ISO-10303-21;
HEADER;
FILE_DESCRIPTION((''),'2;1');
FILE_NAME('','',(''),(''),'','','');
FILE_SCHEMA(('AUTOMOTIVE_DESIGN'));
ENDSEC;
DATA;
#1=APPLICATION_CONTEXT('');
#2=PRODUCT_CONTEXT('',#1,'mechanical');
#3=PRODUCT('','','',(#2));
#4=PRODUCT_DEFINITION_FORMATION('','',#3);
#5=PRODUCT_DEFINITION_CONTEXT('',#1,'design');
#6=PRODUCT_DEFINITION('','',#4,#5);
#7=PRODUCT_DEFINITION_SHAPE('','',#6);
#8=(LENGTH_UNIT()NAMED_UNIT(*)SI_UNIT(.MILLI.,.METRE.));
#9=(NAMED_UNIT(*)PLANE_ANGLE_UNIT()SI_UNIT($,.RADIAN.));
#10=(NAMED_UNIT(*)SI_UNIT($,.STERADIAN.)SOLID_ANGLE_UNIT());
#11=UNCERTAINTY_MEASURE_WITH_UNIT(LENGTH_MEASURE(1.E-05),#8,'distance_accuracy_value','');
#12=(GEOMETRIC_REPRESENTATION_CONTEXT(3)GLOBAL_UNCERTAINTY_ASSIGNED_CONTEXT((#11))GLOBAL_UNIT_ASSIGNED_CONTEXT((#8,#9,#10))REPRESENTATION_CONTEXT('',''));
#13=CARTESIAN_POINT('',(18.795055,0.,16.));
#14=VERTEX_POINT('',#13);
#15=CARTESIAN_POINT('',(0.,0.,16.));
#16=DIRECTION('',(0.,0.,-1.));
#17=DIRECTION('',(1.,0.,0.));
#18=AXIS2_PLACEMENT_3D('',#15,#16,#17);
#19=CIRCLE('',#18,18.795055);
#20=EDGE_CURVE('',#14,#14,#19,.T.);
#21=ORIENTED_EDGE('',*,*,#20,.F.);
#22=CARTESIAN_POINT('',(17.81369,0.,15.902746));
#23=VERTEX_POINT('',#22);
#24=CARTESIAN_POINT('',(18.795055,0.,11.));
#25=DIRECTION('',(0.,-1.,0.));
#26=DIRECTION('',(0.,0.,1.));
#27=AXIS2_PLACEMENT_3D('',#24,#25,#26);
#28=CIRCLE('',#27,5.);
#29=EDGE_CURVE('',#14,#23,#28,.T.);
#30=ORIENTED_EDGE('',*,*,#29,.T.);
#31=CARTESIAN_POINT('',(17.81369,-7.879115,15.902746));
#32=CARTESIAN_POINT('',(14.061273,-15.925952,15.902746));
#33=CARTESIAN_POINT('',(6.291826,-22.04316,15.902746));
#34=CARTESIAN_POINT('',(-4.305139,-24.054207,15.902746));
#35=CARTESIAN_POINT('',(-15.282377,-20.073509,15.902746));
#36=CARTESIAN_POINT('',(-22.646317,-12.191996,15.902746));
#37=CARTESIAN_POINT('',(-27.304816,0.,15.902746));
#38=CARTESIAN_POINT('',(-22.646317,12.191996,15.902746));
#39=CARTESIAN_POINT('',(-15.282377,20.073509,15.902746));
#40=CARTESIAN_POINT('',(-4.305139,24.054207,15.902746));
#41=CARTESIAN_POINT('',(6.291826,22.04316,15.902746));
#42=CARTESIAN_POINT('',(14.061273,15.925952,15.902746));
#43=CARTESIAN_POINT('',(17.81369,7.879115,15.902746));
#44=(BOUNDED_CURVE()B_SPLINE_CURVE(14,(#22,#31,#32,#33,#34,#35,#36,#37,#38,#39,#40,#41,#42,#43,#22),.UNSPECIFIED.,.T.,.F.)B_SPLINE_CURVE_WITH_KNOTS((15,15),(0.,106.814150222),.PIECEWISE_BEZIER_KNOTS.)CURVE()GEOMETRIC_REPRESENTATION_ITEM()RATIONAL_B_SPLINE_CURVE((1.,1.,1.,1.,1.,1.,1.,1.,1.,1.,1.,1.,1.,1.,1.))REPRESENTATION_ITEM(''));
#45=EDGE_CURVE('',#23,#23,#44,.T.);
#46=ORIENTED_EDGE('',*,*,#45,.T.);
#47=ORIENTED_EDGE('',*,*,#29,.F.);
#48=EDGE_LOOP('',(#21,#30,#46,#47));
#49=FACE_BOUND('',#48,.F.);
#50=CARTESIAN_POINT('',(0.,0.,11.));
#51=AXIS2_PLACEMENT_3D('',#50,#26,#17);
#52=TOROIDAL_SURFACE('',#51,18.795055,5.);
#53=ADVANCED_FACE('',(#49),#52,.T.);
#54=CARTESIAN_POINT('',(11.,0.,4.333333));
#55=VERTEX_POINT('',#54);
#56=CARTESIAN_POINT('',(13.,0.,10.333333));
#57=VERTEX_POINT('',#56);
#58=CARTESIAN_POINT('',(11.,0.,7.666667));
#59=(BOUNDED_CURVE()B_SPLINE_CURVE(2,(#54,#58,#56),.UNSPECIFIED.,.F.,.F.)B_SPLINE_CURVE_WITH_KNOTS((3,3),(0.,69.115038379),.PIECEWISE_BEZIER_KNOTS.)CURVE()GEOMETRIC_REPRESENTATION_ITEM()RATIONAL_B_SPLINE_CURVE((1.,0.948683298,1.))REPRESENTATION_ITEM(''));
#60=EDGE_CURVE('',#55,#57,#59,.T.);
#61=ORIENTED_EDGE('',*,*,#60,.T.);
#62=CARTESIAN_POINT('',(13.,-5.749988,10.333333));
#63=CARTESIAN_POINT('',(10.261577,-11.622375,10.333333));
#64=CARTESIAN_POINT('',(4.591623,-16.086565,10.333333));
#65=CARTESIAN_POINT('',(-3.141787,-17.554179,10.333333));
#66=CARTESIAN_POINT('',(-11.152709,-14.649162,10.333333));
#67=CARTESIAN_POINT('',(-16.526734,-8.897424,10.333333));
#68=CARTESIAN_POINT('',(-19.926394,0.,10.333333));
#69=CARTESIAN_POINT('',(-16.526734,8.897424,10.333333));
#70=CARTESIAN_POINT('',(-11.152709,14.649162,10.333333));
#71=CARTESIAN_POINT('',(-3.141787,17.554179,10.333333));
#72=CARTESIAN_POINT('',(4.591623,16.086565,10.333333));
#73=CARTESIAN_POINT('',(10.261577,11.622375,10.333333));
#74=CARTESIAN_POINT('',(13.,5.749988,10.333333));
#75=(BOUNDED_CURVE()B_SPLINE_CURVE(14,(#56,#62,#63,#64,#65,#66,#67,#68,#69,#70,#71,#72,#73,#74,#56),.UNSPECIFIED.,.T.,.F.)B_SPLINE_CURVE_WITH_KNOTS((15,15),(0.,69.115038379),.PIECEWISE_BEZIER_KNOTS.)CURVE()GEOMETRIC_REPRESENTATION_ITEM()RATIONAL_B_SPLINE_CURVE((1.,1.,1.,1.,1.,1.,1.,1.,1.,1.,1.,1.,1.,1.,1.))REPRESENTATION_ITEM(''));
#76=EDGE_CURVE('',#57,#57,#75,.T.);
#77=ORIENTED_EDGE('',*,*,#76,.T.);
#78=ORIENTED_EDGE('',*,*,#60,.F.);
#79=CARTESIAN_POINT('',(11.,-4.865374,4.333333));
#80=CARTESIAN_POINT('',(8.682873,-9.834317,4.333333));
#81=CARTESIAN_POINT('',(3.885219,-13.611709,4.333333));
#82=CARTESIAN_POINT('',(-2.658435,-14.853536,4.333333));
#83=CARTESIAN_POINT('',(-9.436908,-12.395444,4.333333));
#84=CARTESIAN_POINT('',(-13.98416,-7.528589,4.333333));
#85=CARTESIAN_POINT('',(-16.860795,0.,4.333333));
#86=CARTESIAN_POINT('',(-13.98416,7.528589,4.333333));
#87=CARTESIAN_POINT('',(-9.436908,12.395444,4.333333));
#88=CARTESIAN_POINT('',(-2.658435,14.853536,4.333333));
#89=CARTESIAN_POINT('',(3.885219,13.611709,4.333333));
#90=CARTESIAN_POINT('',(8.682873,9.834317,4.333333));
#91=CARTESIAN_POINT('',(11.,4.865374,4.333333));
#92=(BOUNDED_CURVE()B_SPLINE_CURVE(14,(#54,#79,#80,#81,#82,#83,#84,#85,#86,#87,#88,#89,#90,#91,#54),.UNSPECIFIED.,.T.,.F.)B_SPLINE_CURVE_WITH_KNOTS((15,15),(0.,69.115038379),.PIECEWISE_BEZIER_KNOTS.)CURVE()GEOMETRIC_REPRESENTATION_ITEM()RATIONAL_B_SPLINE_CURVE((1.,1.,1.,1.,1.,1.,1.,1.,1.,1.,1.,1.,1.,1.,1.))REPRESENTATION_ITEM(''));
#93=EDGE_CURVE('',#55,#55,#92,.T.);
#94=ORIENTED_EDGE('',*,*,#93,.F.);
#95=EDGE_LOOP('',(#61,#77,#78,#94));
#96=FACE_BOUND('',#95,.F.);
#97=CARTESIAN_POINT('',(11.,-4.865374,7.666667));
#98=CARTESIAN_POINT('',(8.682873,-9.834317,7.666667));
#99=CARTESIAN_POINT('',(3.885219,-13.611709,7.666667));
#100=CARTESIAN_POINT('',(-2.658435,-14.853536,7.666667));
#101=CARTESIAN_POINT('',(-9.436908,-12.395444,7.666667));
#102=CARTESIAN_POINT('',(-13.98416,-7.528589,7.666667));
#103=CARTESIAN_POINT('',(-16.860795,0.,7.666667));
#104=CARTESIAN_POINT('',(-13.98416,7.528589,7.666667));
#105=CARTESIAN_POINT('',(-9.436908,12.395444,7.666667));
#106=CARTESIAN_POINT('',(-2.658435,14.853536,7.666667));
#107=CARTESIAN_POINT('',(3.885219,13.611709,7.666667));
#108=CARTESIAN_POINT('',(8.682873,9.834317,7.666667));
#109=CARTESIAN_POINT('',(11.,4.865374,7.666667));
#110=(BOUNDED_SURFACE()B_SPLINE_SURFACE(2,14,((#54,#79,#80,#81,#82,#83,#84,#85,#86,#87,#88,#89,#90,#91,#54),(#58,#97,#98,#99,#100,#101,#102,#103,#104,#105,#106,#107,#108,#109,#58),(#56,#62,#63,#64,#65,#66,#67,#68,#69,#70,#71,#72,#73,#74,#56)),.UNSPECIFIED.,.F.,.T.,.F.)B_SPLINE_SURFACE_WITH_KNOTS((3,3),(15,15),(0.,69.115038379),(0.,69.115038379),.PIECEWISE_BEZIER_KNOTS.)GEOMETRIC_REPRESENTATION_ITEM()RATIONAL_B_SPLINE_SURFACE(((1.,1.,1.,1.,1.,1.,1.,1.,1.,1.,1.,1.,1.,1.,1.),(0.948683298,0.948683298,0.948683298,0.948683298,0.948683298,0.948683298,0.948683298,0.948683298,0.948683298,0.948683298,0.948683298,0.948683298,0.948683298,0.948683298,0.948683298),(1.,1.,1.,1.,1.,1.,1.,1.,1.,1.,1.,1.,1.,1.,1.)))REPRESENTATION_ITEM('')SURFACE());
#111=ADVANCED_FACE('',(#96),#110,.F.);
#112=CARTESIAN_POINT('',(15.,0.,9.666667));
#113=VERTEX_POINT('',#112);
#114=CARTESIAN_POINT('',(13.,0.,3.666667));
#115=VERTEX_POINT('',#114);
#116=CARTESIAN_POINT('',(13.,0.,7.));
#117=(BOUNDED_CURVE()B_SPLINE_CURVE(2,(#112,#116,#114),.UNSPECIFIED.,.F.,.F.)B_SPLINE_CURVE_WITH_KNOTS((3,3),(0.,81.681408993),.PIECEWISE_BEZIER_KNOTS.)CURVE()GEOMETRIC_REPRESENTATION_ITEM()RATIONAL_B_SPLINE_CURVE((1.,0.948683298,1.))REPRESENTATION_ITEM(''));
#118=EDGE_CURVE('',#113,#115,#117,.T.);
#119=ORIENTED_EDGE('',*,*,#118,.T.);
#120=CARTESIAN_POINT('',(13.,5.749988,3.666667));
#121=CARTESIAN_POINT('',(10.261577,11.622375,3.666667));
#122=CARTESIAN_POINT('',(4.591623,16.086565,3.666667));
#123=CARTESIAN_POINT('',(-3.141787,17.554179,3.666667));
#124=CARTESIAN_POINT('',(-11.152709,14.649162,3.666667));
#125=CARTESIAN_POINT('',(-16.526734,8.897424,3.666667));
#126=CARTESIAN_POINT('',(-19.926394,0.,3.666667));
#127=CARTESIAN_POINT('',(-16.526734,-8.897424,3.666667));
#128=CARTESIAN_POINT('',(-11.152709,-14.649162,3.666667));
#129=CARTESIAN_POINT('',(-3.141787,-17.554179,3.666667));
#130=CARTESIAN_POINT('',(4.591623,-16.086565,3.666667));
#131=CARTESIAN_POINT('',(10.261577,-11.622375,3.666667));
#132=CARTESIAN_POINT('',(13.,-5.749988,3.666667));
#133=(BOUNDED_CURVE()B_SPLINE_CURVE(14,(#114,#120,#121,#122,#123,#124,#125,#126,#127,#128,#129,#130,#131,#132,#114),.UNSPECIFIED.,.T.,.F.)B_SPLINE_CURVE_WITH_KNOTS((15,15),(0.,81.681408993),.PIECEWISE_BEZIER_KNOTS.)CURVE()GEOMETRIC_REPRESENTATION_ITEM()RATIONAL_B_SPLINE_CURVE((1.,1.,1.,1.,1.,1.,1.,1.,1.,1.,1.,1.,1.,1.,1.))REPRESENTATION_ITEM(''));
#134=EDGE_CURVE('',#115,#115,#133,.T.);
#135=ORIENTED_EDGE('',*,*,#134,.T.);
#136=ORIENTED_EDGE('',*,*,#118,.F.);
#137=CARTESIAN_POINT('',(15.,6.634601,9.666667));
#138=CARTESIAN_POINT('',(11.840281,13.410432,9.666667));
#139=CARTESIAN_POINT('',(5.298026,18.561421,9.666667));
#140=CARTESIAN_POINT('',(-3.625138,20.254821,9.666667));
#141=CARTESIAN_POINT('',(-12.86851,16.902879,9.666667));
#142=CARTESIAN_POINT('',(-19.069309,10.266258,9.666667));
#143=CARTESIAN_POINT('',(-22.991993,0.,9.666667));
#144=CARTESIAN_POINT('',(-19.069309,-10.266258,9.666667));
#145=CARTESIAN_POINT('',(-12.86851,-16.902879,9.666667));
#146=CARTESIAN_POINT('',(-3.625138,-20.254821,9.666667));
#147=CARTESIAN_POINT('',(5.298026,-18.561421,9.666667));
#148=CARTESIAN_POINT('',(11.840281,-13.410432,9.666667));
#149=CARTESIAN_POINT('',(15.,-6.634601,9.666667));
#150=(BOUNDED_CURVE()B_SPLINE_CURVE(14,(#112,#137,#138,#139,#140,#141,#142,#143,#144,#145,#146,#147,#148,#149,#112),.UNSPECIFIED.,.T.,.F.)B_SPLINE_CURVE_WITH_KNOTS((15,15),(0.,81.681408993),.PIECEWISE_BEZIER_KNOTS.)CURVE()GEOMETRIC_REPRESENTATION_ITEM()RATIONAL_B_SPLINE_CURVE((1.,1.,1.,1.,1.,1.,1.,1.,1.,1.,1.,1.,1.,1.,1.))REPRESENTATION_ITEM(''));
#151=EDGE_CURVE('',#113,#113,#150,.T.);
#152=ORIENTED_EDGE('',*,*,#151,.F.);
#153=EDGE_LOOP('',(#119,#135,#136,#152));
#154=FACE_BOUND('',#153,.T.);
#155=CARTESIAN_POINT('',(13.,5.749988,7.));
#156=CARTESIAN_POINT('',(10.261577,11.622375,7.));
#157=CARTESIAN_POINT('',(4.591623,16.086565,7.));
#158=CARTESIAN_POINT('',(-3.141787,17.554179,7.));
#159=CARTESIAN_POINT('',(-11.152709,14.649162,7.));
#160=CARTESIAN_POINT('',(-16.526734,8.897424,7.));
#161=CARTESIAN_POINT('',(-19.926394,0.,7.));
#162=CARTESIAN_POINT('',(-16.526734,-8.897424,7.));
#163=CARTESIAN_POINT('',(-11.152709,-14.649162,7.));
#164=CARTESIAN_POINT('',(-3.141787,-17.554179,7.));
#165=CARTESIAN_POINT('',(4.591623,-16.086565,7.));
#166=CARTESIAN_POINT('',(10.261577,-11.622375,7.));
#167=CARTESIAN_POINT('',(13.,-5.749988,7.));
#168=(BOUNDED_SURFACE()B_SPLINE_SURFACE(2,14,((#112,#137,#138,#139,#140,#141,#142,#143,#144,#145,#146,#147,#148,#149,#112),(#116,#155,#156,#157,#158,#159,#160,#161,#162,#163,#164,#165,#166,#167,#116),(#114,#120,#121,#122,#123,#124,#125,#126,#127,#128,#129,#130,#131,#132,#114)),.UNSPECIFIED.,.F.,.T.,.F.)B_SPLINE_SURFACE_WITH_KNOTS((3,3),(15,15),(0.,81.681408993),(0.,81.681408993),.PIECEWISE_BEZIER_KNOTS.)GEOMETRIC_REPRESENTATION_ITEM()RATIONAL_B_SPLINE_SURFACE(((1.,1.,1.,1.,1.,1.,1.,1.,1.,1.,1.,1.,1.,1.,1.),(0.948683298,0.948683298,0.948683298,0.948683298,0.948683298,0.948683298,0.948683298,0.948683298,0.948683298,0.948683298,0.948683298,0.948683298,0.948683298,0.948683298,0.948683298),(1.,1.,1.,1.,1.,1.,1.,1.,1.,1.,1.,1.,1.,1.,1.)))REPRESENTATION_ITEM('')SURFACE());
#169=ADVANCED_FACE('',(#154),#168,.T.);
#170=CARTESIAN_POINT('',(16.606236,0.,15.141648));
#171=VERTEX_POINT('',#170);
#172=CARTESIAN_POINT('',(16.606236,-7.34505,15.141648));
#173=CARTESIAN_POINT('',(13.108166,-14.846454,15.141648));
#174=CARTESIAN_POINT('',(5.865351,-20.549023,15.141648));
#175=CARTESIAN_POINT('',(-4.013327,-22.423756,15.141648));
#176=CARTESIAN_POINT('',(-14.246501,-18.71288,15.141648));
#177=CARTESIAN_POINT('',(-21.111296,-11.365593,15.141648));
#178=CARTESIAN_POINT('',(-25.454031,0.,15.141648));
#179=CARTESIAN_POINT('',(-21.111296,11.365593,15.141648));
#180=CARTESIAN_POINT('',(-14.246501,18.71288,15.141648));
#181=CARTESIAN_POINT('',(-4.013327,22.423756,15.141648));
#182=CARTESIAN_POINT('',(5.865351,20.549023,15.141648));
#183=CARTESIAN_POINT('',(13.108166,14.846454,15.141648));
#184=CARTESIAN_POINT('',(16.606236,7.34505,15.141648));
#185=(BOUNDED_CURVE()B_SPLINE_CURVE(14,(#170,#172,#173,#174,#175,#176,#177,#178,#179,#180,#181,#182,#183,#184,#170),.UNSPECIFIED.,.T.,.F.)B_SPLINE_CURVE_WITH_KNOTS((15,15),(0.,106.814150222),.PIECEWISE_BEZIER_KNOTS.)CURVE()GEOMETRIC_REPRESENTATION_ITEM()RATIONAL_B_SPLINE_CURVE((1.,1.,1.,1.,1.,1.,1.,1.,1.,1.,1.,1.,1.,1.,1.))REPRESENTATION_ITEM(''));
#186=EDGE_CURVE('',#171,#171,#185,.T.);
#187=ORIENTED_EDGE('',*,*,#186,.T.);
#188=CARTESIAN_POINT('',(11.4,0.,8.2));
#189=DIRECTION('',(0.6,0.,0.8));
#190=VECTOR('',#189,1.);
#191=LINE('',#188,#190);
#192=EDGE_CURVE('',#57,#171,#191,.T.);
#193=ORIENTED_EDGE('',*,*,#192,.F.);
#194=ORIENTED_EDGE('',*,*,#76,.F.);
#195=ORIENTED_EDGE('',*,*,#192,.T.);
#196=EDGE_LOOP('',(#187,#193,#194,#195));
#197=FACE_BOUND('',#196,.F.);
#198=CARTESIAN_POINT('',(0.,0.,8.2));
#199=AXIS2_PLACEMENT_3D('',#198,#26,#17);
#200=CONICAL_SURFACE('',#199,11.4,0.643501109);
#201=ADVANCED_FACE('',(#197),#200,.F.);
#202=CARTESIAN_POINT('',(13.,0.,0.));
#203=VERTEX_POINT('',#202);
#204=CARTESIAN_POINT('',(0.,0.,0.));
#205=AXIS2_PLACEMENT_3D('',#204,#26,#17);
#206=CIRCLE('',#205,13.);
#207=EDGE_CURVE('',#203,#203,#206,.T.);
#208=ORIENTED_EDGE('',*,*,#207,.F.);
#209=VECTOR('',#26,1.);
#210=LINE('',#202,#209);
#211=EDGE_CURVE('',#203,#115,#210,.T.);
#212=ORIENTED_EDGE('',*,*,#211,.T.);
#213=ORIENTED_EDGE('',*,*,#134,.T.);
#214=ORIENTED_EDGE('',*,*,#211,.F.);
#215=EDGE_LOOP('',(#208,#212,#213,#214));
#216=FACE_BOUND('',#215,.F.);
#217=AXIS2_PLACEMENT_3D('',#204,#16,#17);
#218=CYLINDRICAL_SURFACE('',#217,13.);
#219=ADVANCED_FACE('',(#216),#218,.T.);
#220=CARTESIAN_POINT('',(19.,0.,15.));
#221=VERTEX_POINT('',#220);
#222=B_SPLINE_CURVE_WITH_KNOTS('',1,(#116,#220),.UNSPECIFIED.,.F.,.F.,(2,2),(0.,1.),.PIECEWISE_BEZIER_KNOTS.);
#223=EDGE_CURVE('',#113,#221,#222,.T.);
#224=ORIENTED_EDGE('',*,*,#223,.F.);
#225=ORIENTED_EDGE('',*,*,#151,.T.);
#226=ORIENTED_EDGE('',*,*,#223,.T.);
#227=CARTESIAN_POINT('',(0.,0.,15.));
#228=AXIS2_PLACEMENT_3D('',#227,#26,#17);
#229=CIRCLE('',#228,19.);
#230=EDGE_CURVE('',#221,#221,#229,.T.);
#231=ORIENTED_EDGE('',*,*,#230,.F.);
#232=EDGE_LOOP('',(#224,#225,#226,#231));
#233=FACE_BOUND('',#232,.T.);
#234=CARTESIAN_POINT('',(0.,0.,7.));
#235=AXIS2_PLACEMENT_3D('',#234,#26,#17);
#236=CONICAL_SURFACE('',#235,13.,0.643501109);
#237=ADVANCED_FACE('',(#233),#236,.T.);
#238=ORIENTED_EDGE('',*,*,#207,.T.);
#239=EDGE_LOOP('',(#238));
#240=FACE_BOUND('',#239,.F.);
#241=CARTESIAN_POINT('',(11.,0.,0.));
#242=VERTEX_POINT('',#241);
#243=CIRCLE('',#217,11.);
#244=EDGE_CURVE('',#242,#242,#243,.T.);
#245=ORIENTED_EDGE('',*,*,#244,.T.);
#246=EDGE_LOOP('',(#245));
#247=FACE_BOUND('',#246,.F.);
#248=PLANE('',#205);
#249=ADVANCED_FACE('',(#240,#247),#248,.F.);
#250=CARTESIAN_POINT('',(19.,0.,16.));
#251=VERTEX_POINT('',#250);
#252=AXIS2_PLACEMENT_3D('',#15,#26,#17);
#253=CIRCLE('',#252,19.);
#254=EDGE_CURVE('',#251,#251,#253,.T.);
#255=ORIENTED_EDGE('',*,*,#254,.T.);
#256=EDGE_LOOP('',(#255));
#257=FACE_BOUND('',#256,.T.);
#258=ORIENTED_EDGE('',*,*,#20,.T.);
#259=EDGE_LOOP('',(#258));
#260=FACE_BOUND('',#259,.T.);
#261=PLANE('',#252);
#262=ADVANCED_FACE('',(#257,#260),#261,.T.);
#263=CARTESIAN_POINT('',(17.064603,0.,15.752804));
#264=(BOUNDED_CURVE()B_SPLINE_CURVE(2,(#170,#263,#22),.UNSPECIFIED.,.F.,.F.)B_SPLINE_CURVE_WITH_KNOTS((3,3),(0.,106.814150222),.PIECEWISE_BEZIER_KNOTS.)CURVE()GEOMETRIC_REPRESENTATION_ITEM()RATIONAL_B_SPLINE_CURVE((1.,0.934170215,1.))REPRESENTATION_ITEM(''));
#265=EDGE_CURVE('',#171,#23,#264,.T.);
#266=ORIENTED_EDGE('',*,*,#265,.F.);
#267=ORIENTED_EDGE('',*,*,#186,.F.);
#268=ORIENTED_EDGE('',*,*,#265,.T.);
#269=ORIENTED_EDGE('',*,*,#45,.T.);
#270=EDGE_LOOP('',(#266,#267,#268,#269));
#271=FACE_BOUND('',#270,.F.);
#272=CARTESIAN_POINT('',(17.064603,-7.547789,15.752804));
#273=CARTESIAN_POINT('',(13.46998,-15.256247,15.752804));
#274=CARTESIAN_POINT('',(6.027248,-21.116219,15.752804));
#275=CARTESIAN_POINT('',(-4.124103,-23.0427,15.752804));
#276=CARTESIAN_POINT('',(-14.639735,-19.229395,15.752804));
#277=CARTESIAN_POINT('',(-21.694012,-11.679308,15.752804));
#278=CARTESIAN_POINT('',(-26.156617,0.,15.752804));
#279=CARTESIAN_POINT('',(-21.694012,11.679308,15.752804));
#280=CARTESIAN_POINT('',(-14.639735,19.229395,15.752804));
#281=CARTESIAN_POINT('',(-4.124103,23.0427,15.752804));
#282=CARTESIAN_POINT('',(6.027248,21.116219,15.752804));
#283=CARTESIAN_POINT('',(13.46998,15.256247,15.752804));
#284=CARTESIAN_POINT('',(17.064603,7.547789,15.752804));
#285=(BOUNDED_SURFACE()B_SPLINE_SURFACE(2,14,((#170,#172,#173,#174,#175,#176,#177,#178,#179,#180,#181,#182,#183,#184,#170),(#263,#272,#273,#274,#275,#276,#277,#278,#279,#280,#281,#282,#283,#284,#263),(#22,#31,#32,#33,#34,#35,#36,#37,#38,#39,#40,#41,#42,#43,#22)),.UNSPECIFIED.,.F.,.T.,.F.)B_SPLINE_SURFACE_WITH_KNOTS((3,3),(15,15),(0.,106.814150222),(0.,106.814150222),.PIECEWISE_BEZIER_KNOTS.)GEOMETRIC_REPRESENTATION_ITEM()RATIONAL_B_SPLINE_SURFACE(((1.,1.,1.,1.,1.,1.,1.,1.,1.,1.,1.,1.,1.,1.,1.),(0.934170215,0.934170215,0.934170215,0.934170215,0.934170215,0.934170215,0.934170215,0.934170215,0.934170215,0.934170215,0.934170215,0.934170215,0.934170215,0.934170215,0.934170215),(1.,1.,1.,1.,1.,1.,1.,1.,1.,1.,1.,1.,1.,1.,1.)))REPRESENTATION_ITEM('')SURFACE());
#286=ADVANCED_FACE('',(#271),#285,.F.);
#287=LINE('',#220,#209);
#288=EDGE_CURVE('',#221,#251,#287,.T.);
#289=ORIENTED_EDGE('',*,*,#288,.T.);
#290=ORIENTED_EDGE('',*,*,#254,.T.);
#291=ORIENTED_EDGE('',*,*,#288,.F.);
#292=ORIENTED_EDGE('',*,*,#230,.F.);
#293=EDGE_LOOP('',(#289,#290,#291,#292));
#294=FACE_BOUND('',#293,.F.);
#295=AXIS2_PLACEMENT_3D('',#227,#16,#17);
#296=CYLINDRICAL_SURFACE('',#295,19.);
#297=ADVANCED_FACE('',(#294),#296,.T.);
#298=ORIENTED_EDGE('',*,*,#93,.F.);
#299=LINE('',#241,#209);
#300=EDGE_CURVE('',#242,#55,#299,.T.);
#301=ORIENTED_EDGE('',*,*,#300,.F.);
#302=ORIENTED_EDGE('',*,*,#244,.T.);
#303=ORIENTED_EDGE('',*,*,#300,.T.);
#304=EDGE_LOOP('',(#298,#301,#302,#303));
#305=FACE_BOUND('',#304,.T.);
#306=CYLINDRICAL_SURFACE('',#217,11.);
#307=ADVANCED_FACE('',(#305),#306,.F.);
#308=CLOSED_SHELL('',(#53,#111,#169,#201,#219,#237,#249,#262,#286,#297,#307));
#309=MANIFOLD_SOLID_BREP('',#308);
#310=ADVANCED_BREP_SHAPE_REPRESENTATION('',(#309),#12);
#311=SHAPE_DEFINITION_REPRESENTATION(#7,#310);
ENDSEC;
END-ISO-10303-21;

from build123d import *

# Parameters (mm, degrees)
F0_R      = 13
F3_DEPTH  = 7
F2_R      = 19
F4_DEPTH  = 1
F3_FACE_R = 13
F4_FACE_R = 19
F6_T      = -2
F7_R      = 10
F9_R      = 10
F10_R     = 2


# Not quite as in the source:
# - a fillet or chamfer that OpenCascade refuses, or shapes differently, is made with other operations: its cross-section is extruded or revolved along the edge and cut away or added


with BuildPart() as f3:
    # F0 (on Top) → F3 (new body)
    with BuildSketch(Plane.XY):
        Circle(F0_R)
    extrude(amount=F3_DEPTH)



with BuildPart() as f4:
    # F2 (on offset) → F4 (new body)
    with BuildSketch(Plane.XY.offset(15)):
        Circle(F2_R)
    extrude(amount=F4_DEPTH)


with BuildPart() as f3_1:
    add(f3.part)

    add(f4.part)  # F5 merges F4
    # F3_face (on face) → F5 section 0
    with BuildSketch(Plane.XY.offset(7)):
        Circle(F3_FACE_R)
    # F4_face (on face) → F5 section 1
    with BuildSketch(Plane(origin=(0, 0, 15), x_dir=(1, 0, 0), z_dir=(0, 0, -1))):
        Circle(F4_FACE_R)
    loft()

    # F6
    f6_openings = [f3_1.faces().sort_by_distance(p)[0] for p in [
        (0, 0, 16),
        (0, 0, 0),
    ]]
    offset(amount=F6_T, openings=f6_openings, kind=Kind.INTERSECTION)

    # F7
    f7_edges = [f3_1.edges().sort_by_distance(p)[0] for p in [
        (-13, 0, 7),
    ]]
    fillet(f7_edges, radius=F7_R)

    # F8: fillet of radius 5 on 2 edges, made by hand

    # F8_s1 → F8_t2 (revolve, cut)
    with BuildSketch(Plane.XZ):
        with BuildLine():
            ThreePointArc((18.7950549357, 16), (17.8821840065, 15.9159604013), (17, 15.6666666667))
            Line((17, 15.6666666667), (17, 16))
            Line((17, 16), (18.7950549357, 16))
        make_face()
    revolve(axis=Axis((0, 0, 16), (0, 0, -1)), mode=Mode.SUBTRACT)

    # F9
    f9_edges = [f3_1.edges().sort_by_distance(p)[0] for p in [
        (-11, 0, 7.666667),
    ]]
    fillet(f9_edges, radius=F9_R)

    # F10
    f10_edges = [f3_1.edges().sort_by_distance(p)[0] for p in [
        (-17, 0, 15.666667),
    ]]
    fillet(f10_edges, radius=F10_R)


solid = f3_1.part
